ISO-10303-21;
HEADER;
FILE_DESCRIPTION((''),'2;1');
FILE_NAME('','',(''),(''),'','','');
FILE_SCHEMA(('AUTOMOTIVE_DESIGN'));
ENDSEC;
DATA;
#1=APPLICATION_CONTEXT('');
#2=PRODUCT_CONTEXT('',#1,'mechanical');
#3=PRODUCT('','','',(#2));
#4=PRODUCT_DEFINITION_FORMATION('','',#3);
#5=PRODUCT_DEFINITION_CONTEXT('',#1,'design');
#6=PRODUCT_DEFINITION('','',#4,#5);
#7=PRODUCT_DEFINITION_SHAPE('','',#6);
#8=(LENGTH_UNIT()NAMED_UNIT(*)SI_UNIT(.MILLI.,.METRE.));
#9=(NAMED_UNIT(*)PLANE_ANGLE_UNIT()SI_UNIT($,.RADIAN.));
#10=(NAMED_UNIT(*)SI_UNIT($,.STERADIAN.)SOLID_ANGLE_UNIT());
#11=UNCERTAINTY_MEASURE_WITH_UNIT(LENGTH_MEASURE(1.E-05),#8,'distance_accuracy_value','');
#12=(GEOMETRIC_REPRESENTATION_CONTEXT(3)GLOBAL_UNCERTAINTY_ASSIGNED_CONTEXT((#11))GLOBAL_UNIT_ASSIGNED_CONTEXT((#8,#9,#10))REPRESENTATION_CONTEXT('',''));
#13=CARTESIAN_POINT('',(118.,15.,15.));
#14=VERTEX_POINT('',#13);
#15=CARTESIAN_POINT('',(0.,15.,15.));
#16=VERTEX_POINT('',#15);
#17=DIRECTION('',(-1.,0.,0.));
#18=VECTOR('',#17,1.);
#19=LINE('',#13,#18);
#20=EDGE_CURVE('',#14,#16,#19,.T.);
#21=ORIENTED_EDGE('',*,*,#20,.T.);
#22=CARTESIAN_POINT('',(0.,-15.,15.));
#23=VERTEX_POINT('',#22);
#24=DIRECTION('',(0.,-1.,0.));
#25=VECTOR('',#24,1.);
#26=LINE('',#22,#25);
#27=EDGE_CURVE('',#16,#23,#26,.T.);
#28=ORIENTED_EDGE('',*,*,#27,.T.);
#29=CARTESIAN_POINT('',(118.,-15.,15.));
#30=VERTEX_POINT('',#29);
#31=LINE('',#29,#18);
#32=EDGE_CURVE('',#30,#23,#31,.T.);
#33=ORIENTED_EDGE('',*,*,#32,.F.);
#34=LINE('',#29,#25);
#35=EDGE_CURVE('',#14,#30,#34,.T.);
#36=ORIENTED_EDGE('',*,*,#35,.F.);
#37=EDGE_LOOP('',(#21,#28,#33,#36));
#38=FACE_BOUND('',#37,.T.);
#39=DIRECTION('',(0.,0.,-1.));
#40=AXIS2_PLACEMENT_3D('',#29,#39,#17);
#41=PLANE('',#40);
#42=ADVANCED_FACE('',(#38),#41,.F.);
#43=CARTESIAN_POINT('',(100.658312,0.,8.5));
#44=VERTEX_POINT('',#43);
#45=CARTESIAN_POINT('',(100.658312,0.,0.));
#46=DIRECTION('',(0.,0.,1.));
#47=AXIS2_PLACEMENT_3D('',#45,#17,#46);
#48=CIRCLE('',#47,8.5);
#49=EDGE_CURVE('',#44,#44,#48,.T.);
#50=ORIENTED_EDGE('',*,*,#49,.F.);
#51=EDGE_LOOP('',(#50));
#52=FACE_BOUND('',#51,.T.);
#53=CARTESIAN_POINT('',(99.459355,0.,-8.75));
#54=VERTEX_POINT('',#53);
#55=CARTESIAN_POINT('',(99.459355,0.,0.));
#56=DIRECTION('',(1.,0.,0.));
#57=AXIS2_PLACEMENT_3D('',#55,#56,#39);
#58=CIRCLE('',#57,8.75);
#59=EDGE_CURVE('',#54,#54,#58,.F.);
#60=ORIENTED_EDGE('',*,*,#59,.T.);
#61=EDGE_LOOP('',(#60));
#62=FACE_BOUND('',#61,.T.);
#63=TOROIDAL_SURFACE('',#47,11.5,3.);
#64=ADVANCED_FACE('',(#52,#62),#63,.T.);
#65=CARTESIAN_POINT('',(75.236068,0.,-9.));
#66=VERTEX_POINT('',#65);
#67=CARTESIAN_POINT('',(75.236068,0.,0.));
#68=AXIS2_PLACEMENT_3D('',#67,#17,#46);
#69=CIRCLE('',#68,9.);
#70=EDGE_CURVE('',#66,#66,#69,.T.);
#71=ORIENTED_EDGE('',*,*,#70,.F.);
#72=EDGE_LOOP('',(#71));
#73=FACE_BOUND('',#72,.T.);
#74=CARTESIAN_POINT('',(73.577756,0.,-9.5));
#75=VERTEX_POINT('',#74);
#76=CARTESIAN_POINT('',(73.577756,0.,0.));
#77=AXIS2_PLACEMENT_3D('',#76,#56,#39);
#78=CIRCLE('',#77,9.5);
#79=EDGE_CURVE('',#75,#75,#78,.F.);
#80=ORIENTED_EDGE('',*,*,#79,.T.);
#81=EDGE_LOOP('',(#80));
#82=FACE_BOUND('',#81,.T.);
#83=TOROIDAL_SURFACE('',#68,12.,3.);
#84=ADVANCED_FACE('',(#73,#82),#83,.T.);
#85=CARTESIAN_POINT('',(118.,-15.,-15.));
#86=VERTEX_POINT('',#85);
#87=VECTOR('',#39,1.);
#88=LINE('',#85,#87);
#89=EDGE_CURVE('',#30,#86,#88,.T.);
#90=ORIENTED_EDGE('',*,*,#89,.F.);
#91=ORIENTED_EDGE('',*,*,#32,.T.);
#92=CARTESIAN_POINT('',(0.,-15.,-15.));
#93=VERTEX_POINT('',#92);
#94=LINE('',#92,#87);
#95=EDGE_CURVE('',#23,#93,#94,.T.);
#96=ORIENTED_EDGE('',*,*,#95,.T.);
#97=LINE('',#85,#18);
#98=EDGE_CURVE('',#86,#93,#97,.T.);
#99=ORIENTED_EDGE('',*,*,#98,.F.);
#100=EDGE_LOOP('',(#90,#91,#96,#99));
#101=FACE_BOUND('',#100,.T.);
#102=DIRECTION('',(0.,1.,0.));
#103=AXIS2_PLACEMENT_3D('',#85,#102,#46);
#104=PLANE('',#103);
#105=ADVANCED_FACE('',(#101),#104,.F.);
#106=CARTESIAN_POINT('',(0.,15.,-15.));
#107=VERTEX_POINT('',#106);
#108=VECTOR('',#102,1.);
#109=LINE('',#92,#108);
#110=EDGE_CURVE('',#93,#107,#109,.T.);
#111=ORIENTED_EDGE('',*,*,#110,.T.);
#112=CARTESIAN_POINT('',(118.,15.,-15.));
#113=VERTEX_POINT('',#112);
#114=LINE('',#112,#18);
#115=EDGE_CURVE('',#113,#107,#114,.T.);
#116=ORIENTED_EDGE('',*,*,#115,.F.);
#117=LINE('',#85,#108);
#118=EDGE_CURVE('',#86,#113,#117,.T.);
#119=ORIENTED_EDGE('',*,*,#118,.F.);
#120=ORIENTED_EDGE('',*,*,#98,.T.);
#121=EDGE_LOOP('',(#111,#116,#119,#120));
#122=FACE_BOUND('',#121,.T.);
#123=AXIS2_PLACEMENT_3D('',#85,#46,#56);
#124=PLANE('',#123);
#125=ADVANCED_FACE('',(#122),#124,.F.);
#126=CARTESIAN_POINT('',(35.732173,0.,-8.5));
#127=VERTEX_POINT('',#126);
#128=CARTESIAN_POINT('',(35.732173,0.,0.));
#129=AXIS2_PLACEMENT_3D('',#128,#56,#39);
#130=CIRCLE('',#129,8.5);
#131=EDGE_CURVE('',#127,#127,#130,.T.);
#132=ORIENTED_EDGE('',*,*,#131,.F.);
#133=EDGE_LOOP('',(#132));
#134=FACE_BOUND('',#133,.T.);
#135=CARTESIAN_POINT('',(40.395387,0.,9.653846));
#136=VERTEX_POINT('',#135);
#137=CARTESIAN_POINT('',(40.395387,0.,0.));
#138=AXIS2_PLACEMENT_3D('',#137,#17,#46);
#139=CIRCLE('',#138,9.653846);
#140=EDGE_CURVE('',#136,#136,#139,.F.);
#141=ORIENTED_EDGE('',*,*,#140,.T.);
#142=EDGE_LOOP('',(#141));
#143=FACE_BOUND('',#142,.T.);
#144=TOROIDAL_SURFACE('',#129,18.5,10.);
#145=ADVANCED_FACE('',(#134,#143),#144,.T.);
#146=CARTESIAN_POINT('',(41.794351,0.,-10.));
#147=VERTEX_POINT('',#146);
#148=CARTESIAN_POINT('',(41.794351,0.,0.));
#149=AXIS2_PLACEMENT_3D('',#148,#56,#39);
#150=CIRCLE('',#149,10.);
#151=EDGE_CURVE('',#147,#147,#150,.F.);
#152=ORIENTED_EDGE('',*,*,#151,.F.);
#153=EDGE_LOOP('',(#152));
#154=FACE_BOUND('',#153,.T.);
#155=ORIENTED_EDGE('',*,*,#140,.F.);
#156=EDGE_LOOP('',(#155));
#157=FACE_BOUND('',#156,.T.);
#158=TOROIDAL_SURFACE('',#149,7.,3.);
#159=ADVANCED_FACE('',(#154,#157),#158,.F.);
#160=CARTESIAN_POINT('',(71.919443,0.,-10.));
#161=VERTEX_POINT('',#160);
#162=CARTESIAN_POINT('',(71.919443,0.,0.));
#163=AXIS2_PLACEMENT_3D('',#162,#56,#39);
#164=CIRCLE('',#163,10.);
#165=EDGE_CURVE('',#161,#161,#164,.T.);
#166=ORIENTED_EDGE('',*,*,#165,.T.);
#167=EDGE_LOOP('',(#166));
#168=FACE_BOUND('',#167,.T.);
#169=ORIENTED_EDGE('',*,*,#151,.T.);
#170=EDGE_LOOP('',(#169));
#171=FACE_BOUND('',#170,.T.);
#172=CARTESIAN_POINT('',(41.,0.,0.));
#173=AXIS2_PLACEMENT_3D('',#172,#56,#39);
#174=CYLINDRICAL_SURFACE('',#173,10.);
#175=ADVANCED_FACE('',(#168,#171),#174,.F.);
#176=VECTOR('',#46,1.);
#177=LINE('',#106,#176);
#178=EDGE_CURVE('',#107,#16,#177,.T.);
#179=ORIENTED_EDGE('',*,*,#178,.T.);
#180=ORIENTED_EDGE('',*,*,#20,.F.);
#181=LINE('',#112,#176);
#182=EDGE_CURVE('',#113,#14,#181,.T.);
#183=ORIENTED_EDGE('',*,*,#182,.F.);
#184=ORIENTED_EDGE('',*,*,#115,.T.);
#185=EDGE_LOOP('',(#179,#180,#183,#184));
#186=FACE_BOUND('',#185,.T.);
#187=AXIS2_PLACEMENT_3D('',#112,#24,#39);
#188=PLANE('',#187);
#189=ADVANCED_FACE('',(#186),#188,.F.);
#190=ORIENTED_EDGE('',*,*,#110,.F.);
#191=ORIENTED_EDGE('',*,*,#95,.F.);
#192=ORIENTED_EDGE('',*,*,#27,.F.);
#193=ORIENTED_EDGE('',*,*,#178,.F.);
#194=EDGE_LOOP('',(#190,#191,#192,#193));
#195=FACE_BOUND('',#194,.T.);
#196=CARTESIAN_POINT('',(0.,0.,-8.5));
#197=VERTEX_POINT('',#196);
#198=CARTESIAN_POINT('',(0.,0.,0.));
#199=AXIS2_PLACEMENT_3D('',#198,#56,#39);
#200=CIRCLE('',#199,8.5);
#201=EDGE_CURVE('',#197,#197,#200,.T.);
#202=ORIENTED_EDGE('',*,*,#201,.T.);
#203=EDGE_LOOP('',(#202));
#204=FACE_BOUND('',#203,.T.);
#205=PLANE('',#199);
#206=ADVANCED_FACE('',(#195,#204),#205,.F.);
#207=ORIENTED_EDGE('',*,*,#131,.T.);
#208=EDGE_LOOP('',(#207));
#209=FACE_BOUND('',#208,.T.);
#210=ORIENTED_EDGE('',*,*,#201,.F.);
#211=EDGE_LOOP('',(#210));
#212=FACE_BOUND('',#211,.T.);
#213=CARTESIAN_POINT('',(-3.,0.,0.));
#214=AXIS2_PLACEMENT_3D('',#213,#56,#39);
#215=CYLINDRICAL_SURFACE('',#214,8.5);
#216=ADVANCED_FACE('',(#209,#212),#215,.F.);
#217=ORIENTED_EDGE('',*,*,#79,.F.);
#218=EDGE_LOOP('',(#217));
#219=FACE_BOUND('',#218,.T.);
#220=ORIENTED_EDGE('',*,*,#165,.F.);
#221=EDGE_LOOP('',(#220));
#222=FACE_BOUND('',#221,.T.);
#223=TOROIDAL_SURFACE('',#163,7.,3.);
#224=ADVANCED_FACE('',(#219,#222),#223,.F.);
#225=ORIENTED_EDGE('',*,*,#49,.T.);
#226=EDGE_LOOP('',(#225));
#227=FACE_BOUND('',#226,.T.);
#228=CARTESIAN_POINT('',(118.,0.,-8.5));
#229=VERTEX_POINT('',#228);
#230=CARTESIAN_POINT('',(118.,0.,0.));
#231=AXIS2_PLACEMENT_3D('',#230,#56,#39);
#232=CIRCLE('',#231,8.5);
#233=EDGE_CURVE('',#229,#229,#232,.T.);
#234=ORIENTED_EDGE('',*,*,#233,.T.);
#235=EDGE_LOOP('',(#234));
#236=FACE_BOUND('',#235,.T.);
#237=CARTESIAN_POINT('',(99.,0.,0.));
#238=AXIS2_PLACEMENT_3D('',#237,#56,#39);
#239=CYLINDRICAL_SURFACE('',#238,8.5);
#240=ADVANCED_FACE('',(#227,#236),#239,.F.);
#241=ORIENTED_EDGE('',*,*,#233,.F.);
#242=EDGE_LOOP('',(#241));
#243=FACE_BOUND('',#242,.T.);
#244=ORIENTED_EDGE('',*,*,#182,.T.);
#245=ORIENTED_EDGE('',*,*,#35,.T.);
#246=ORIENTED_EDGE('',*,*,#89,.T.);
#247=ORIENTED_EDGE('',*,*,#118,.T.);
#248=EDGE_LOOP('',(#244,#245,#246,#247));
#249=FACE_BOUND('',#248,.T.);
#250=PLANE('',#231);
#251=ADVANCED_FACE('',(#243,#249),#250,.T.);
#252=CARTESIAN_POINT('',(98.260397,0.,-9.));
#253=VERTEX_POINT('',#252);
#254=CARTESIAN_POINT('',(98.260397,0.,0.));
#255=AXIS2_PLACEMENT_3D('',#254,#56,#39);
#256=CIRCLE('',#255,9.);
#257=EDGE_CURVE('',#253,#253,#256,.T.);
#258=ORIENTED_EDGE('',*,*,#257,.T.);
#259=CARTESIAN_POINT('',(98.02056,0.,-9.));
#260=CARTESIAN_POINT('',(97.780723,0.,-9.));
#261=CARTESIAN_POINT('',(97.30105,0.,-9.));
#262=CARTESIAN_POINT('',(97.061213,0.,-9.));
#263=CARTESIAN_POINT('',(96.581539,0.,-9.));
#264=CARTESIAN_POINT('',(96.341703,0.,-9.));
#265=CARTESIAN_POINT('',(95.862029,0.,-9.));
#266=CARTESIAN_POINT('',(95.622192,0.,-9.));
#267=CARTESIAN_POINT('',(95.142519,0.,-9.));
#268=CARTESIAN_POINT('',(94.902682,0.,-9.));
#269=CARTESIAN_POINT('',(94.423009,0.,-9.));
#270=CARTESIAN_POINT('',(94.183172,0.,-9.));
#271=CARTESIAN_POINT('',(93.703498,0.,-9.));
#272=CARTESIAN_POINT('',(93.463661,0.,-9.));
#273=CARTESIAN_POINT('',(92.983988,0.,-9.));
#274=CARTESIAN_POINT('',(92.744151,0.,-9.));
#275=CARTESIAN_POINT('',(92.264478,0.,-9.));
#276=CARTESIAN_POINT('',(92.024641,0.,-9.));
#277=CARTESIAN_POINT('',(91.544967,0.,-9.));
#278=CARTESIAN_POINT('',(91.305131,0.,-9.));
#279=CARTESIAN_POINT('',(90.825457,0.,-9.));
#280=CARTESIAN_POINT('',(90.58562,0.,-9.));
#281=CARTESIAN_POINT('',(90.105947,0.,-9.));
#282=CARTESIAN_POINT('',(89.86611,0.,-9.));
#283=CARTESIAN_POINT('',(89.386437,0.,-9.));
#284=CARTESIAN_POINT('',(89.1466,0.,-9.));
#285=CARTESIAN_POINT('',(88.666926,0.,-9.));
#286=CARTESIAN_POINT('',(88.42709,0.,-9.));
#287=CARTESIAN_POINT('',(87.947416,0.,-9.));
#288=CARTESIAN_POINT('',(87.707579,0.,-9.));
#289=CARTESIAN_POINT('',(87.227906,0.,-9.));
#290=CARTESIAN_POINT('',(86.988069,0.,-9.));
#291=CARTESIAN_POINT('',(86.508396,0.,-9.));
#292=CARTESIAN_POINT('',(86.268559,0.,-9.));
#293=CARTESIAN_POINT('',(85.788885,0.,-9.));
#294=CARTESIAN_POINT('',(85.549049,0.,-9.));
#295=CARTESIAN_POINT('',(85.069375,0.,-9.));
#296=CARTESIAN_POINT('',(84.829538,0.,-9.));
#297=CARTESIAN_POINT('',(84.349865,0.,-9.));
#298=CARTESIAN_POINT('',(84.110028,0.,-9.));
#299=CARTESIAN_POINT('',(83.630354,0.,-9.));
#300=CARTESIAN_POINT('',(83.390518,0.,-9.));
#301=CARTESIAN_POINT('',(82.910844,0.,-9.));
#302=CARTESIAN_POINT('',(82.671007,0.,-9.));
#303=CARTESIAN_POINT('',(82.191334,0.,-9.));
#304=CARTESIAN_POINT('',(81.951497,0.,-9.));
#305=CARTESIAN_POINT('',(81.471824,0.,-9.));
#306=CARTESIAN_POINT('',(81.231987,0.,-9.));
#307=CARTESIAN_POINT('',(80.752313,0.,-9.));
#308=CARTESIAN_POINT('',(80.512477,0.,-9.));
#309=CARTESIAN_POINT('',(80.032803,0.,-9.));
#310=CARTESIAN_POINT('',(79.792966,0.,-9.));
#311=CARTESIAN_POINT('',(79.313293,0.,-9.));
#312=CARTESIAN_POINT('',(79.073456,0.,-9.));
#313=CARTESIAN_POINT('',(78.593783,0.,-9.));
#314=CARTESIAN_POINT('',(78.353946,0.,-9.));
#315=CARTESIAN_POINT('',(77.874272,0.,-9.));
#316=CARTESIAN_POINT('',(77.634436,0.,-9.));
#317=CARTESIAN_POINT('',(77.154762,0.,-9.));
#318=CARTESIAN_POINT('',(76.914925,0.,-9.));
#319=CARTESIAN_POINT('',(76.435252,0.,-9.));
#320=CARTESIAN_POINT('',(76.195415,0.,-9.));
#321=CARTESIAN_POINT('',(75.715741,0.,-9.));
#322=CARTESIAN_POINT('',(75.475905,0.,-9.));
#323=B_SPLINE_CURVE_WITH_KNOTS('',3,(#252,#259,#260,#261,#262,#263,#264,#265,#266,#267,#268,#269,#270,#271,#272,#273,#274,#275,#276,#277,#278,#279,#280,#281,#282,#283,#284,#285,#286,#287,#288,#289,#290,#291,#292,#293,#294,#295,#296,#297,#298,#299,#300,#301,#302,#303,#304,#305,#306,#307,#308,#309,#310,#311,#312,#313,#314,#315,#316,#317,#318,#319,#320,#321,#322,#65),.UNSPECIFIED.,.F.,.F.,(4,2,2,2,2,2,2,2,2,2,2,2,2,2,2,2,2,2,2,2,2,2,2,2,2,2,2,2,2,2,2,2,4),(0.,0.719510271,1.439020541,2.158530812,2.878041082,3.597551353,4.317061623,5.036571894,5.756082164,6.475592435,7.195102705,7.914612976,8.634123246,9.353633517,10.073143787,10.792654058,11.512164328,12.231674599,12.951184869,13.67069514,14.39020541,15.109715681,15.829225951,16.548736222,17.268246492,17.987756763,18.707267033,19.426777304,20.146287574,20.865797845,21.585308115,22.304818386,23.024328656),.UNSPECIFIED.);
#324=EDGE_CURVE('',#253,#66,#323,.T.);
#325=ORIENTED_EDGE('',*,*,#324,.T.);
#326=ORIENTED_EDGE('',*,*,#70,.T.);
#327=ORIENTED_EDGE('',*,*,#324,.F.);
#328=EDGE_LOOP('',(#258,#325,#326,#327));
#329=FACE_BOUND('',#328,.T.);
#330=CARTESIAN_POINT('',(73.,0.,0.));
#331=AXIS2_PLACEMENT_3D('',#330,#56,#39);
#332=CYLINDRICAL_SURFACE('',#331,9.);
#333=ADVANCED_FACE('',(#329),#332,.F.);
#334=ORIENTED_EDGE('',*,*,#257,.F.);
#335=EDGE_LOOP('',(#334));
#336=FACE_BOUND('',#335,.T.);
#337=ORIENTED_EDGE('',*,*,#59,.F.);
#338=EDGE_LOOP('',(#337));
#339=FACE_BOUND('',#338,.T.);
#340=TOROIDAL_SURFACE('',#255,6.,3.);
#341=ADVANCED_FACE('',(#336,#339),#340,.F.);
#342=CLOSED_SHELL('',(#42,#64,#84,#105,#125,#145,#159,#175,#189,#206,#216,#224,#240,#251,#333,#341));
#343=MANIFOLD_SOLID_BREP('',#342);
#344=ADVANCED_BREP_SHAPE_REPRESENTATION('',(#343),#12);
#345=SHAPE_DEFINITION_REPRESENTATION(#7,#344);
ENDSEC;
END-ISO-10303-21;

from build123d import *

# Parameters (mm, degrees)
SKETCH1_W           = 30
SKETCH1_H           = 30
BOSS_EXTRUDE1_DEPTH = 118
SKETCH2_R           = 8.5
CUT_EXTRUDE1_DEPTH  = 19
SKETCH3_R           = 9
CUT_EXTRUDE2_DEPTH  = 26
SKETCH4_R           = 10
CUT_EXTRUDE3_DEPTH  = 32
SKETCH5_R           = 8.5
CUT_EXTRUDE4_DEPTH  = 44
FILLET3_R           = 10
FILLET4_R           = 3
FILLET5_R           = 3
FILLET6_R           = 3
FILLET7_R           = 3
FILLET8_R           = 3


with BuildPart() as part:
    # Sketch1 → Boss-Extrude1 (new body)
    with BuildSketch(Plane(origin=(0, 0, 0), x_dir=(0, 0, -1), z_dir=(1, 0, 0))):
        Rectangle(SKETCH1_W, SKETCH1_H)
    extrude(amount=BOSS_EXTRUDE1_DEPTH)

    # Sketch2 → Cut-Extrude1 (cut)
    with BuildSketch(Plane(origin=(118, 0, 0), x_dir=(0, 0, -1), z_dir=(1, 0, 0))):
        Circle(SKETCH2_R)
    extrude(amount=-CUT_EXTRUDE1_DEPTH, mode=Mode.SUBTRACT)

    # Sketch3 → Cut-Extrude2 (cut)
    with BuildSketch(Plane(origin=(99, 0, 0), x_dir=(0, 0, -1), z_dir=(1, 0, 0))):
        Circle(SKETCH3_R)
    extrude(amount=-CUT_EXTRUDE2_DEPTH, mode=Mode.SUBTRACT)

    # Sketch4 → Cut-Extrude3 (cut)
    with BuildSketch(Plane(origin=(73, 0, 0), x_dir=(0, 0, -1), z_dir=(1, 0, 0))):
        Circle(SKETCH4_R)
    extrude(amount=-CUT_EXTRUDE3_DEPTH, mode=Mode.SUBTRACT)

    # Sketch5 → Cut-Extrude4 (cut)
    with BuildSketch(Plane(origin=(41, 0, 0), x_dir=(0, 0, -1), z_dir=(1, 0, 0))):
        Circle(SKETCH5_R)
    extrude(amount=-CUT_EXTRUDE4_DEPTH, mode=Mode.SUBTRACT)

    # Fillet3
    # the kernel refuses this fillet: 10 mm, written as the material it takes off along each edge
    with BuildSketch(Plane(origin=(41, 0, 0), x_dir=(0, 0, -1), z_dir=(0, -1, 0))) as fillet3_piece_1:
        with BuildLine():
            CenterArc((18.5, -5.267826876), FILLET3_R, 148.211669383, 31.788330617)
            Line((10, 0), (9.83, 0.105356538))
            ThreePointArc((9.83, 0.105356538), (9.25, 0.2), (8.5, 0.2))
            Line((8.5, 0.2), (8.3, 0))
            Line((8.3, 0), (8.3, -5.267826876))
            Line((8.3, -5.267826876), (8.5, -5.267826876))
        make_face()
    revolve(axis=Axis((41, 0, 0), (1, 0, 0)), mode=Mode.SUBTRACT)

    # Fillet4
    fillet4_edges = [part.edges().sort_by_distance(p)[0] for p in [
        (41, 0, 10),
    ]]
    fillet(fillet4_edges, radius=FILLET4_R)

    # Fillet5
    # the kernel refuses this fillet: 3 mm, written as the material it takes off along each edge
    with BuildSketch(Plane(origin=(73, 0, 0), x_dir=(0, 0, -1), z_dir=(0, -1, 0))) as fillet5_piece_1:
        with BuildLine():
            CenterArc((12, 2.236067977), FILLET5_R, 180, 48.189685104)
            Line((9, 2.236067977), (8.94, 2.236067977))
            Line((8.94, 2.236067977), (8.94, 0))
            Line((8.94, 0), (9, -0.06))
            ThreePointArc((9, -0.06), (9.5, -0.06), (9.96, -0.04472136))
            Line((9.96, -0.04472136), (10, 0))
        make_face()
    revolve(axis=Axis((73, 0, 0), (1, 0, 0)), mode=Mode.SUBTRACT)

    # Fillet6
    fillet6_edges = [part.edges().sort_by_distance(p)[0] for p in [
        (73, 0, 10),
    ]]
    fillet(fillet6_edges, radius=FILLET6_R)

    # Fillet7
    # the kernel refuses this fillet: 3 mm, written as the material it takes off along each edge
    with BuildSketch(Plane(origin=(99, 0, 0), x_dir=(0, 0, -1), z_dir=(0, -1, 0))) as fillet7_piece_1:
        with BuildLine():
            CenterArc((11.5, 1.658312395), FILLET7_R, 180, 33.557309762)
            Line((8.5, 1.658312395), (8.44, 1.658312395))
            Line((8.44, 1.658312395), (8.44, 0))
            Line((8.44, 0), (8.5, -0.06))
            ThreePointArc((8.5, -0.06), (8.75, -0.06), (8.95, -0.033166248))
            Line((8.95, -0.033166248), (9, 0))
        make_face()
    revolve(axis=Axis((99, 0, 0), (1, 0, 0)), mode=Mode.SUBTRACT)

    # Fillet8
    fillet8_edges = [part.edges().sort_by_distance(p)[0] for p in [
        (99, 0, 9),
    ]]
    fillet(fillet8_edges, radius=FILLET8_R)


solid = part.part
